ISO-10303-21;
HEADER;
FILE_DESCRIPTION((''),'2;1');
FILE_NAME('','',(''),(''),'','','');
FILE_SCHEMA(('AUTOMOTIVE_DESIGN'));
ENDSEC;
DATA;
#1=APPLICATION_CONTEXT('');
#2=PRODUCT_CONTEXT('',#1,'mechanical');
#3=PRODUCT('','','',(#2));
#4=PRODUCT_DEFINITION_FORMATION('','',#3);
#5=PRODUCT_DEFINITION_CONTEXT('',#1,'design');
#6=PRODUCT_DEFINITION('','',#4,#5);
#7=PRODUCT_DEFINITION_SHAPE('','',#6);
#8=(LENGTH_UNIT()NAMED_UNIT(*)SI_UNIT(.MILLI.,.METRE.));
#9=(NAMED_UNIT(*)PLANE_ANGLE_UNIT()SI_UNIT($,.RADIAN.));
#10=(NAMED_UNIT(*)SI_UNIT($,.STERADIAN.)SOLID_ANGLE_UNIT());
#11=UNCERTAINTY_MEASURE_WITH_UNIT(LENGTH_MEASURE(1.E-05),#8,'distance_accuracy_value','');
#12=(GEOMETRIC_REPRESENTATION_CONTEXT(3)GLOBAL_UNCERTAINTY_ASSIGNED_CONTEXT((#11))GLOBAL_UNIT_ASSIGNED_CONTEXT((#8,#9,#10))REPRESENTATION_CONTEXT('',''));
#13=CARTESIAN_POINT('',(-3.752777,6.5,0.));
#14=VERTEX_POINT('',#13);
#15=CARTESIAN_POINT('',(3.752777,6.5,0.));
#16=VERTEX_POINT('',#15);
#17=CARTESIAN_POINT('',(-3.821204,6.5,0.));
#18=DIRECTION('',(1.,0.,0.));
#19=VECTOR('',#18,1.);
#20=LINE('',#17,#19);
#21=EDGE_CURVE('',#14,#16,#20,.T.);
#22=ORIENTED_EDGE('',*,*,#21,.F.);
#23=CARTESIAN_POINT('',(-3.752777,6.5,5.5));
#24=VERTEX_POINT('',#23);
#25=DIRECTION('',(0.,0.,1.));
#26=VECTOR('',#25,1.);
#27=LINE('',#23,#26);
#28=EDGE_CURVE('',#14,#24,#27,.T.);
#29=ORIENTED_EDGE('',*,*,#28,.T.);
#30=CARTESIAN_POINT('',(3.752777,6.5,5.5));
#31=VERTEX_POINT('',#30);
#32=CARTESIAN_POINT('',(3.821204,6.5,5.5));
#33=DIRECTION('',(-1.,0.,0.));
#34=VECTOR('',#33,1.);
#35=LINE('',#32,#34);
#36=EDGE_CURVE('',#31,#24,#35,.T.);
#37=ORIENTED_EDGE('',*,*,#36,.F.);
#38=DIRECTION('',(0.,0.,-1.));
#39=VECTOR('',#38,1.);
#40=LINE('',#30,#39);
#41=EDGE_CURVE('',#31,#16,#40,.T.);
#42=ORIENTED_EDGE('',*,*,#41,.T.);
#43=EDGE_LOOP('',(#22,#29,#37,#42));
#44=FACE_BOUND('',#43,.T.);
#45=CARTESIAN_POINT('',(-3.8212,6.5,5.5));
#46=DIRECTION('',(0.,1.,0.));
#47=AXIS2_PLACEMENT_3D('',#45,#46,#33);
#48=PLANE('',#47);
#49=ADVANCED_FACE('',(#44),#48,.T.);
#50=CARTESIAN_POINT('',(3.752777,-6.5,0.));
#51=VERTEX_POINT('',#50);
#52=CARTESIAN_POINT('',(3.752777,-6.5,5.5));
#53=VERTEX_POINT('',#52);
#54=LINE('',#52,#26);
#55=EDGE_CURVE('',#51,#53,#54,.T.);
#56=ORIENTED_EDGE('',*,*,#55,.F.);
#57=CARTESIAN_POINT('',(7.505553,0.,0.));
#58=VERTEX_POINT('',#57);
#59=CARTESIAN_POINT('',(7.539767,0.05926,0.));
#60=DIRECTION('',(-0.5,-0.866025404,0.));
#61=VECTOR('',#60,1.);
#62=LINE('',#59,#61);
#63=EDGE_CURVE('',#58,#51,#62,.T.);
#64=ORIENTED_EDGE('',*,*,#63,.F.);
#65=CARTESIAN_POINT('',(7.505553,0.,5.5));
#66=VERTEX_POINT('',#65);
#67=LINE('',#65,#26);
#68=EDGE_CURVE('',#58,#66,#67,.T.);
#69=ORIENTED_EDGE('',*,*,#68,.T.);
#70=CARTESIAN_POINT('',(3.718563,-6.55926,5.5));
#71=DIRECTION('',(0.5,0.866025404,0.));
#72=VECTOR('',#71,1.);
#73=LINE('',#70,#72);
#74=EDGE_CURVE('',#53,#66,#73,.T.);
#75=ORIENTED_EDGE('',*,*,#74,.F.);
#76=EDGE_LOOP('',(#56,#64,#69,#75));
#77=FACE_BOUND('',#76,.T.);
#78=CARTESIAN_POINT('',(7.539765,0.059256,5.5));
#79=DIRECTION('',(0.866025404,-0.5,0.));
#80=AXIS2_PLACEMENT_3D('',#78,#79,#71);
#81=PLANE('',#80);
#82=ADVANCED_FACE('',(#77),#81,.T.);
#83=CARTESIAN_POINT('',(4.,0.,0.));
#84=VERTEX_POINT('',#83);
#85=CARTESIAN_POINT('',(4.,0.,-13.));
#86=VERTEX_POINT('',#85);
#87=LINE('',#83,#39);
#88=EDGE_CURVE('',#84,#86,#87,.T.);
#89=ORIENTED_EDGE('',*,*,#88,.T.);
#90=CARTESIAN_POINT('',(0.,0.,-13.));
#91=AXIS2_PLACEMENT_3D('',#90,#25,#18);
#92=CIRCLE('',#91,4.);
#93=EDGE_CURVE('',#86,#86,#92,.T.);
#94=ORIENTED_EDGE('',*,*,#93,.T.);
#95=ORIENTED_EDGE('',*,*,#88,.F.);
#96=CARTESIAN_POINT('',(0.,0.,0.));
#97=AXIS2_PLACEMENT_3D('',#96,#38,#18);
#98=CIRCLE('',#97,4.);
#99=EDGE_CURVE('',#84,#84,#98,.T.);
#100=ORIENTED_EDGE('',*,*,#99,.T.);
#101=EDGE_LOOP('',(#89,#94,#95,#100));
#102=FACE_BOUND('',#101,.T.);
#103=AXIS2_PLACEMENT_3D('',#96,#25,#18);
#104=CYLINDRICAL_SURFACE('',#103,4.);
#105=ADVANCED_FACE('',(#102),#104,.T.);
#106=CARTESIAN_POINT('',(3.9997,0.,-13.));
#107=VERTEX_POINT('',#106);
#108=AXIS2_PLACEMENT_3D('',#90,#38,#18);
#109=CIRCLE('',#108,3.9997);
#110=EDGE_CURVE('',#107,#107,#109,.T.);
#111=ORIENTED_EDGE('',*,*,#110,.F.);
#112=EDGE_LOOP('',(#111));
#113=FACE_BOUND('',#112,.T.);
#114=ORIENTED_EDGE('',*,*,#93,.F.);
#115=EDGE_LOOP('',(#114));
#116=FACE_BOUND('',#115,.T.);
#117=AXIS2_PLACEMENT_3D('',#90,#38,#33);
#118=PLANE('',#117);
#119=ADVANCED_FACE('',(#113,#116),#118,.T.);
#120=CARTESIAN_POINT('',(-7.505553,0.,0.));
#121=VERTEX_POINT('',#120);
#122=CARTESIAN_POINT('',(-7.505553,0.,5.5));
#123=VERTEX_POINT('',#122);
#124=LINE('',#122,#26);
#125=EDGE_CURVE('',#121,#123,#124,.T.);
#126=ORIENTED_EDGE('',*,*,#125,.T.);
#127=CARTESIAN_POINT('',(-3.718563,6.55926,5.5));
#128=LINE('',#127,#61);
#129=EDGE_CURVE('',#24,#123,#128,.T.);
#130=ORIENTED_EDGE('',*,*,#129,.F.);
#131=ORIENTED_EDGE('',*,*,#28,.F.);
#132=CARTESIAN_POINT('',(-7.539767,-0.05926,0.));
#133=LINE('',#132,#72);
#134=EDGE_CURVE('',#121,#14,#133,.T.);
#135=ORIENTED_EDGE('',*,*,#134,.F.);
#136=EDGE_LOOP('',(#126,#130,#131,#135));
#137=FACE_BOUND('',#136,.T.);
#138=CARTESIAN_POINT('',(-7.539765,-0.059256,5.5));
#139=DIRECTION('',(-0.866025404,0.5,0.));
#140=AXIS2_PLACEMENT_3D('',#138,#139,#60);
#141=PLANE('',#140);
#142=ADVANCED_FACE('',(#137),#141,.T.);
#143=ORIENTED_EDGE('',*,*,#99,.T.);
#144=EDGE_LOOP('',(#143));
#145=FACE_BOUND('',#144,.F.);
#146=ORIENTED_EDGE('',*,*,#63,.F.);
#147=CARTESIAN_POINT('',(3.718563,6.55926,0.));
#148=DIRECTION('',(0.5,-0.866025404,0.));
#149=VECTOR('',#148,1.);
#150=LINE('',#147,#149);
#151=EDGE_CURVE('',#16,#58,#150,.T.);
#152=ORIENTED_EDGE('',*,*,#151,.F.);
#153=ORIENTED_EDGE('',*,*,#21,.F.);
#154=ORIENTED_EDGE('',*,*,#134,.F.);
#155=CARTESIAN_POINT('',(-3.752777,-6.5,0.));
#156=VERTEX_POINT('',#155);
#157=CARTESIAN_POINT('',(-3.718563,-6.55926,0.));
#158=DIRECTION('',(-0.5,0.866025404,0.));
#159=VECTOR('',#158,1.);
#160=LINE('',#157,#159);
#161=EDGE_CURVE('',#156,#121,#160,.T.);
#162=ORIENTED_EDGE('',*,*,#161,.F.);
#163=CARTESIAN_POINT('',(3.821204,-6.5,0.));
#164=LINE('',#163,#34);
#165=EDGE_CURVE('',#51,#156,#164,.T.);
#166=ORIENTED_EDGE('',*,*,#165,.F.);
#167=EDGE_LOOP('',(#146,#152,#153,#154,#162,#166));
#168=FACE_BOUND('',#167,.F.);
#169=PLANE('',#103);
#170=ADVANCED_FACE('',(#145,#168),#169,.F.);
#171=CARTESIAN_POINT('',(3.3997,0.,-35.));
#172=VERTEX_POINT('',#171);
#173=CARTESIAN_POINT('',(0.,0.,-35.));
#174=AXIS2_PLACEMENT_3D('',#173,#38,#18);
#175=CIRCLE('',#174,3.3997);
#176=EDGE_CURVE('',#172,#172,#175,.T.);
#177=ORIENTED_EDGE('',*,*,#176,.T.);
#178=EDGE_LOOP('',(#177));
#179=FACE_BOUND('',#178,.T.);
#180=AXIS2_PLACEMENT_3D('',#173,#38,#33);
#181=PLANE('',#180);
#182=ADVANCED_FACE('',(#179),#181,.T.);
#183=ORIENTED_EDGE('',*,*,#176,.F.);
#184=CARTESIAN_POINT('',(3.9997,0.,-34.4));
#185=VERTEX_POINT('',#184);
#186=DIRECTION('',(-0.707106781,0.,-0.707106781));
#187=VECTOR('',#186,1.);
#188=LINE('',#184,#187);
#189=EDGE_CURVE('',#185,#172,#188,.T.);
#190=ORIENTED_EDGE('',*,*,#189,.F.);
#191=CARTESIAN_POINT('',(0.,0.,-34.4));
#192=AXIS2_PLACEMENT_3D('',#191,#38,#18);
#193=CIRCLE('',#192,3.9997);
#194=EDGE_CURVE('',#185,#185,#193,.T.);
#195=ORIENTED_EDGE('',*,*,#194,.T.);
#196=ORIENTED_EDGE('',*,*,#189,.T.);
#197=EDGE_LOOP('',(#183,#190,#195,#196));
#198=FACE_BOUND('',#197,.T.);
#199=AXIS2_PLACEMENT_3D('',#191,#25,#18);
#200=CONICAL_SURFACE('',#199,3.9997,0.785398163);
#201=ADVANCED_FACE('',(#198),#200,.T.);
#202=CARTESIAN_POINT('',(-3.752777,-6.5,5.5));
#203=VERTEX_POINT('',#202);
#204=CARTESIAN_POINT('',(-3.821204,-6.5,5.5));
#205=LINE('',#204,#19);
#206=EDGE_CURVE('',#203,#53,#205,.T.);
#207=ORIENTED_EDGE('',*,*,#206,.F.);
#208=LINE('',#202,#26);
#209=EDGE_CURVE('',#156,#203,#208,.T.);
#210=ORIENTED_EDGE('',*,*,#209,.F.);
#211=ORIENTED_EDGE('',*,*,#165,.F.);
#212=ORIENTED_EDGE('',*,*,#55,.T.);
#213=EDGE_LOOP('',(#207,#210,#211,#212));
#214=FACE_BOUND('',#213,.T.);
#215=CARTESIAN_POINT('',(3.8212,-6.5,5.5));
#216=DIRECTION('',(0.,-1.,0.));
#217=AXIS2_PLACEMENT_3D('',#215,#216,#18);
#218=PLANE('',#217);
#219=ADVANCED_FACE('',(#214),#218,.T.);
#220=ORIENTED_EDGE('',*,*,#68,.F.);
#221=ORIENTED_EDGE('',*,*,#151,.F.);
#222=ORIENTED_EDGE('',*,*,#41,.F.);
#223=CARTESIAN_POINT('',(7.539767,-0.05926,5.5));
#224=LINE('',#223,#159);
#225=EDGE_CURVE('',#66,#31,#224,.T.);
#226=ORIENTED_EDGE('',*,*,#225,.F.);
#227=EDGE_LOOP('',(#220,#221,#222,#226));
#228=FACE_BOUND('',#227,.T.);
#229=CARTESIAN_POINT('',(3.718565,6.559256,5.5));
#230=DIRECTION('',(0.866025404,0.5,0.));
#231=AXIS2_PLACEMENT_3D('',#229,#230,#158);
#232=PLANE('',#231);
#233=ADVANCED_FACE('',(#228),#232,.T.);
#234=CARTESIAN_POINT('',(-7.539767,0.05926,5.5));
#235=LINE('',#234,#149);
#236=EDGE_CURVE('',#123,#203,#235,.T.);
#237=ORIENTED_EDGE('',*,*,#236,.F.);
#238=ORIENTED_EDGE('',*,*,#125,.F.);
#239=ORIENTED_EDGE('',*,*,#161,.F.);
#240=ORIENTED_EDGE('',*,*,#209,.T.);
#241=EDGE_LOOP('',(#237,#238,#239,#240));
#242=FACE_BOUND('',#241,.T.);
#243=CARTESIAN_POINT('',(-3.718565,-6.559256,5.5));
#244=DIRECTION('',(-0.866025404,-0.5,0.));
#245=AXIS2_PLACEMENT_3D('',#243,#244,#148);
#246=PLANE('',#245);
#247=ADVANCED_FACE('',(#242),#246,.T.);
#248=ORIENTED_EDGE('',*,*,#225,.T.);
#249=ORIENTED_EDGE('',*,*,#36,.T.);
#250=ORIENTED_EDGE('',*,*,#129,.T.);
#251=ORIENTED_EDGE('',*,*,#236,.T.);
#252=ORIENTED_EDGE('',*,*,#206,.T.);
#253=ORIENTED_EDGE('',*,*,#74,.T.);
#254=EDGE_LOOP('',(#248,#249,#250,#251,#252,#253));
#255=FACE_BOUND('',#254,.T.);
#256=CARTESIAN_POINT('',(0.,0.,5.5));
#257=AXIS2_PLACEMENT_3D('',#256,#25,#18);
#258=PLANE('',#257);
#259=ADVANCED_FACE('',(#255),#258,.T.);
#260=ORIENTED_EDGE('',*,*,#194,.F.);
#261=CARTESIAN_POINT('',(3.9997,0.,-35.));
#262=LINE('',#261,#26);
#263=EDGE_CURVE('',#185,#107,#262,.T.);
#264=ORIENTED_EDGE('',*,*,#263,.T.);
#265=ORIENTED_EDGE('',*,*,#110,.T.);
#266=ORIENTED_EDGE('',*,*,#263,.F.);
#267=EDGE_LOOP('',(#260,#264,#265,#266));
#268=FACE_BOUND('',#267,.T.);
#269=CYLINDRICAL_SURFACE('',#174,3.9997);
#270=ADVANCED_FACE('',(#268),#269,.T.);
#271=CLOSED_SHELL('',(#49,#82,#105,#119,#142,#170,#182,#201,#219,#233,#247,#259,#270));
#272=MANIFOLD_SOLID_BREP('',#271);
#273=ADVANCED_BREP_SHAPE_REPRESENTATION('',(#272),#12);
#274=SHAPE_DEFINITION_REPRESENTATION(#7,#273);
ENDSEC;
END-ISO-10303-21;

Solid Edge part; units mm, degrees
sketch "Sketch1" plane through (0, 0, 0) normal (0, 0, 1) x (1, 0, 0)
  circle A0 centre (0, 0) radius 7.54
  dimension "D1" = 15.08
extrude "Protrusion1" add sketch "Sketch1" along normal blind 5.5
sketch "Sketch2" plane through (0, 0, 0) normal (0, 0, -1) x (1, 0, 0)
  circle A0 centre (0, 0) radius 4
extrude "Protrusion2" add sketch "Sketch2" along normal blind 35
sketch "Sketch3" plane through (0, 0, -35) normal (0, 0, -1) x (1, 0, 0)
  circle A0 centre (0, 0) radius 3.9997
extrude "Cutout1" cut sketch "Sketch3" against normal blind 22 flip side to cut
chamfer "Chamfer_1" distance 0.6 angle 45 1 edges at (-3.9997, 0, -35)
sketch "Sketch4" plane through (0, 0, 5.5) normal (0, 0, 1) x (1, 0, 0)
  line L0 (-3.8212, 6.5) -> (3.8212, 6.5)
  dimension "D1" = 13
extrude "Cutout2" cut sketch "Sketch4" against normal up to next material side at (0, 6.55, 5.5)
pattern_circular "Pattern1" count 6 over 360 about axis through (0, 0, 5.5) along (0, 0, 1) of "Cutout2"
properties part number "24104776"
